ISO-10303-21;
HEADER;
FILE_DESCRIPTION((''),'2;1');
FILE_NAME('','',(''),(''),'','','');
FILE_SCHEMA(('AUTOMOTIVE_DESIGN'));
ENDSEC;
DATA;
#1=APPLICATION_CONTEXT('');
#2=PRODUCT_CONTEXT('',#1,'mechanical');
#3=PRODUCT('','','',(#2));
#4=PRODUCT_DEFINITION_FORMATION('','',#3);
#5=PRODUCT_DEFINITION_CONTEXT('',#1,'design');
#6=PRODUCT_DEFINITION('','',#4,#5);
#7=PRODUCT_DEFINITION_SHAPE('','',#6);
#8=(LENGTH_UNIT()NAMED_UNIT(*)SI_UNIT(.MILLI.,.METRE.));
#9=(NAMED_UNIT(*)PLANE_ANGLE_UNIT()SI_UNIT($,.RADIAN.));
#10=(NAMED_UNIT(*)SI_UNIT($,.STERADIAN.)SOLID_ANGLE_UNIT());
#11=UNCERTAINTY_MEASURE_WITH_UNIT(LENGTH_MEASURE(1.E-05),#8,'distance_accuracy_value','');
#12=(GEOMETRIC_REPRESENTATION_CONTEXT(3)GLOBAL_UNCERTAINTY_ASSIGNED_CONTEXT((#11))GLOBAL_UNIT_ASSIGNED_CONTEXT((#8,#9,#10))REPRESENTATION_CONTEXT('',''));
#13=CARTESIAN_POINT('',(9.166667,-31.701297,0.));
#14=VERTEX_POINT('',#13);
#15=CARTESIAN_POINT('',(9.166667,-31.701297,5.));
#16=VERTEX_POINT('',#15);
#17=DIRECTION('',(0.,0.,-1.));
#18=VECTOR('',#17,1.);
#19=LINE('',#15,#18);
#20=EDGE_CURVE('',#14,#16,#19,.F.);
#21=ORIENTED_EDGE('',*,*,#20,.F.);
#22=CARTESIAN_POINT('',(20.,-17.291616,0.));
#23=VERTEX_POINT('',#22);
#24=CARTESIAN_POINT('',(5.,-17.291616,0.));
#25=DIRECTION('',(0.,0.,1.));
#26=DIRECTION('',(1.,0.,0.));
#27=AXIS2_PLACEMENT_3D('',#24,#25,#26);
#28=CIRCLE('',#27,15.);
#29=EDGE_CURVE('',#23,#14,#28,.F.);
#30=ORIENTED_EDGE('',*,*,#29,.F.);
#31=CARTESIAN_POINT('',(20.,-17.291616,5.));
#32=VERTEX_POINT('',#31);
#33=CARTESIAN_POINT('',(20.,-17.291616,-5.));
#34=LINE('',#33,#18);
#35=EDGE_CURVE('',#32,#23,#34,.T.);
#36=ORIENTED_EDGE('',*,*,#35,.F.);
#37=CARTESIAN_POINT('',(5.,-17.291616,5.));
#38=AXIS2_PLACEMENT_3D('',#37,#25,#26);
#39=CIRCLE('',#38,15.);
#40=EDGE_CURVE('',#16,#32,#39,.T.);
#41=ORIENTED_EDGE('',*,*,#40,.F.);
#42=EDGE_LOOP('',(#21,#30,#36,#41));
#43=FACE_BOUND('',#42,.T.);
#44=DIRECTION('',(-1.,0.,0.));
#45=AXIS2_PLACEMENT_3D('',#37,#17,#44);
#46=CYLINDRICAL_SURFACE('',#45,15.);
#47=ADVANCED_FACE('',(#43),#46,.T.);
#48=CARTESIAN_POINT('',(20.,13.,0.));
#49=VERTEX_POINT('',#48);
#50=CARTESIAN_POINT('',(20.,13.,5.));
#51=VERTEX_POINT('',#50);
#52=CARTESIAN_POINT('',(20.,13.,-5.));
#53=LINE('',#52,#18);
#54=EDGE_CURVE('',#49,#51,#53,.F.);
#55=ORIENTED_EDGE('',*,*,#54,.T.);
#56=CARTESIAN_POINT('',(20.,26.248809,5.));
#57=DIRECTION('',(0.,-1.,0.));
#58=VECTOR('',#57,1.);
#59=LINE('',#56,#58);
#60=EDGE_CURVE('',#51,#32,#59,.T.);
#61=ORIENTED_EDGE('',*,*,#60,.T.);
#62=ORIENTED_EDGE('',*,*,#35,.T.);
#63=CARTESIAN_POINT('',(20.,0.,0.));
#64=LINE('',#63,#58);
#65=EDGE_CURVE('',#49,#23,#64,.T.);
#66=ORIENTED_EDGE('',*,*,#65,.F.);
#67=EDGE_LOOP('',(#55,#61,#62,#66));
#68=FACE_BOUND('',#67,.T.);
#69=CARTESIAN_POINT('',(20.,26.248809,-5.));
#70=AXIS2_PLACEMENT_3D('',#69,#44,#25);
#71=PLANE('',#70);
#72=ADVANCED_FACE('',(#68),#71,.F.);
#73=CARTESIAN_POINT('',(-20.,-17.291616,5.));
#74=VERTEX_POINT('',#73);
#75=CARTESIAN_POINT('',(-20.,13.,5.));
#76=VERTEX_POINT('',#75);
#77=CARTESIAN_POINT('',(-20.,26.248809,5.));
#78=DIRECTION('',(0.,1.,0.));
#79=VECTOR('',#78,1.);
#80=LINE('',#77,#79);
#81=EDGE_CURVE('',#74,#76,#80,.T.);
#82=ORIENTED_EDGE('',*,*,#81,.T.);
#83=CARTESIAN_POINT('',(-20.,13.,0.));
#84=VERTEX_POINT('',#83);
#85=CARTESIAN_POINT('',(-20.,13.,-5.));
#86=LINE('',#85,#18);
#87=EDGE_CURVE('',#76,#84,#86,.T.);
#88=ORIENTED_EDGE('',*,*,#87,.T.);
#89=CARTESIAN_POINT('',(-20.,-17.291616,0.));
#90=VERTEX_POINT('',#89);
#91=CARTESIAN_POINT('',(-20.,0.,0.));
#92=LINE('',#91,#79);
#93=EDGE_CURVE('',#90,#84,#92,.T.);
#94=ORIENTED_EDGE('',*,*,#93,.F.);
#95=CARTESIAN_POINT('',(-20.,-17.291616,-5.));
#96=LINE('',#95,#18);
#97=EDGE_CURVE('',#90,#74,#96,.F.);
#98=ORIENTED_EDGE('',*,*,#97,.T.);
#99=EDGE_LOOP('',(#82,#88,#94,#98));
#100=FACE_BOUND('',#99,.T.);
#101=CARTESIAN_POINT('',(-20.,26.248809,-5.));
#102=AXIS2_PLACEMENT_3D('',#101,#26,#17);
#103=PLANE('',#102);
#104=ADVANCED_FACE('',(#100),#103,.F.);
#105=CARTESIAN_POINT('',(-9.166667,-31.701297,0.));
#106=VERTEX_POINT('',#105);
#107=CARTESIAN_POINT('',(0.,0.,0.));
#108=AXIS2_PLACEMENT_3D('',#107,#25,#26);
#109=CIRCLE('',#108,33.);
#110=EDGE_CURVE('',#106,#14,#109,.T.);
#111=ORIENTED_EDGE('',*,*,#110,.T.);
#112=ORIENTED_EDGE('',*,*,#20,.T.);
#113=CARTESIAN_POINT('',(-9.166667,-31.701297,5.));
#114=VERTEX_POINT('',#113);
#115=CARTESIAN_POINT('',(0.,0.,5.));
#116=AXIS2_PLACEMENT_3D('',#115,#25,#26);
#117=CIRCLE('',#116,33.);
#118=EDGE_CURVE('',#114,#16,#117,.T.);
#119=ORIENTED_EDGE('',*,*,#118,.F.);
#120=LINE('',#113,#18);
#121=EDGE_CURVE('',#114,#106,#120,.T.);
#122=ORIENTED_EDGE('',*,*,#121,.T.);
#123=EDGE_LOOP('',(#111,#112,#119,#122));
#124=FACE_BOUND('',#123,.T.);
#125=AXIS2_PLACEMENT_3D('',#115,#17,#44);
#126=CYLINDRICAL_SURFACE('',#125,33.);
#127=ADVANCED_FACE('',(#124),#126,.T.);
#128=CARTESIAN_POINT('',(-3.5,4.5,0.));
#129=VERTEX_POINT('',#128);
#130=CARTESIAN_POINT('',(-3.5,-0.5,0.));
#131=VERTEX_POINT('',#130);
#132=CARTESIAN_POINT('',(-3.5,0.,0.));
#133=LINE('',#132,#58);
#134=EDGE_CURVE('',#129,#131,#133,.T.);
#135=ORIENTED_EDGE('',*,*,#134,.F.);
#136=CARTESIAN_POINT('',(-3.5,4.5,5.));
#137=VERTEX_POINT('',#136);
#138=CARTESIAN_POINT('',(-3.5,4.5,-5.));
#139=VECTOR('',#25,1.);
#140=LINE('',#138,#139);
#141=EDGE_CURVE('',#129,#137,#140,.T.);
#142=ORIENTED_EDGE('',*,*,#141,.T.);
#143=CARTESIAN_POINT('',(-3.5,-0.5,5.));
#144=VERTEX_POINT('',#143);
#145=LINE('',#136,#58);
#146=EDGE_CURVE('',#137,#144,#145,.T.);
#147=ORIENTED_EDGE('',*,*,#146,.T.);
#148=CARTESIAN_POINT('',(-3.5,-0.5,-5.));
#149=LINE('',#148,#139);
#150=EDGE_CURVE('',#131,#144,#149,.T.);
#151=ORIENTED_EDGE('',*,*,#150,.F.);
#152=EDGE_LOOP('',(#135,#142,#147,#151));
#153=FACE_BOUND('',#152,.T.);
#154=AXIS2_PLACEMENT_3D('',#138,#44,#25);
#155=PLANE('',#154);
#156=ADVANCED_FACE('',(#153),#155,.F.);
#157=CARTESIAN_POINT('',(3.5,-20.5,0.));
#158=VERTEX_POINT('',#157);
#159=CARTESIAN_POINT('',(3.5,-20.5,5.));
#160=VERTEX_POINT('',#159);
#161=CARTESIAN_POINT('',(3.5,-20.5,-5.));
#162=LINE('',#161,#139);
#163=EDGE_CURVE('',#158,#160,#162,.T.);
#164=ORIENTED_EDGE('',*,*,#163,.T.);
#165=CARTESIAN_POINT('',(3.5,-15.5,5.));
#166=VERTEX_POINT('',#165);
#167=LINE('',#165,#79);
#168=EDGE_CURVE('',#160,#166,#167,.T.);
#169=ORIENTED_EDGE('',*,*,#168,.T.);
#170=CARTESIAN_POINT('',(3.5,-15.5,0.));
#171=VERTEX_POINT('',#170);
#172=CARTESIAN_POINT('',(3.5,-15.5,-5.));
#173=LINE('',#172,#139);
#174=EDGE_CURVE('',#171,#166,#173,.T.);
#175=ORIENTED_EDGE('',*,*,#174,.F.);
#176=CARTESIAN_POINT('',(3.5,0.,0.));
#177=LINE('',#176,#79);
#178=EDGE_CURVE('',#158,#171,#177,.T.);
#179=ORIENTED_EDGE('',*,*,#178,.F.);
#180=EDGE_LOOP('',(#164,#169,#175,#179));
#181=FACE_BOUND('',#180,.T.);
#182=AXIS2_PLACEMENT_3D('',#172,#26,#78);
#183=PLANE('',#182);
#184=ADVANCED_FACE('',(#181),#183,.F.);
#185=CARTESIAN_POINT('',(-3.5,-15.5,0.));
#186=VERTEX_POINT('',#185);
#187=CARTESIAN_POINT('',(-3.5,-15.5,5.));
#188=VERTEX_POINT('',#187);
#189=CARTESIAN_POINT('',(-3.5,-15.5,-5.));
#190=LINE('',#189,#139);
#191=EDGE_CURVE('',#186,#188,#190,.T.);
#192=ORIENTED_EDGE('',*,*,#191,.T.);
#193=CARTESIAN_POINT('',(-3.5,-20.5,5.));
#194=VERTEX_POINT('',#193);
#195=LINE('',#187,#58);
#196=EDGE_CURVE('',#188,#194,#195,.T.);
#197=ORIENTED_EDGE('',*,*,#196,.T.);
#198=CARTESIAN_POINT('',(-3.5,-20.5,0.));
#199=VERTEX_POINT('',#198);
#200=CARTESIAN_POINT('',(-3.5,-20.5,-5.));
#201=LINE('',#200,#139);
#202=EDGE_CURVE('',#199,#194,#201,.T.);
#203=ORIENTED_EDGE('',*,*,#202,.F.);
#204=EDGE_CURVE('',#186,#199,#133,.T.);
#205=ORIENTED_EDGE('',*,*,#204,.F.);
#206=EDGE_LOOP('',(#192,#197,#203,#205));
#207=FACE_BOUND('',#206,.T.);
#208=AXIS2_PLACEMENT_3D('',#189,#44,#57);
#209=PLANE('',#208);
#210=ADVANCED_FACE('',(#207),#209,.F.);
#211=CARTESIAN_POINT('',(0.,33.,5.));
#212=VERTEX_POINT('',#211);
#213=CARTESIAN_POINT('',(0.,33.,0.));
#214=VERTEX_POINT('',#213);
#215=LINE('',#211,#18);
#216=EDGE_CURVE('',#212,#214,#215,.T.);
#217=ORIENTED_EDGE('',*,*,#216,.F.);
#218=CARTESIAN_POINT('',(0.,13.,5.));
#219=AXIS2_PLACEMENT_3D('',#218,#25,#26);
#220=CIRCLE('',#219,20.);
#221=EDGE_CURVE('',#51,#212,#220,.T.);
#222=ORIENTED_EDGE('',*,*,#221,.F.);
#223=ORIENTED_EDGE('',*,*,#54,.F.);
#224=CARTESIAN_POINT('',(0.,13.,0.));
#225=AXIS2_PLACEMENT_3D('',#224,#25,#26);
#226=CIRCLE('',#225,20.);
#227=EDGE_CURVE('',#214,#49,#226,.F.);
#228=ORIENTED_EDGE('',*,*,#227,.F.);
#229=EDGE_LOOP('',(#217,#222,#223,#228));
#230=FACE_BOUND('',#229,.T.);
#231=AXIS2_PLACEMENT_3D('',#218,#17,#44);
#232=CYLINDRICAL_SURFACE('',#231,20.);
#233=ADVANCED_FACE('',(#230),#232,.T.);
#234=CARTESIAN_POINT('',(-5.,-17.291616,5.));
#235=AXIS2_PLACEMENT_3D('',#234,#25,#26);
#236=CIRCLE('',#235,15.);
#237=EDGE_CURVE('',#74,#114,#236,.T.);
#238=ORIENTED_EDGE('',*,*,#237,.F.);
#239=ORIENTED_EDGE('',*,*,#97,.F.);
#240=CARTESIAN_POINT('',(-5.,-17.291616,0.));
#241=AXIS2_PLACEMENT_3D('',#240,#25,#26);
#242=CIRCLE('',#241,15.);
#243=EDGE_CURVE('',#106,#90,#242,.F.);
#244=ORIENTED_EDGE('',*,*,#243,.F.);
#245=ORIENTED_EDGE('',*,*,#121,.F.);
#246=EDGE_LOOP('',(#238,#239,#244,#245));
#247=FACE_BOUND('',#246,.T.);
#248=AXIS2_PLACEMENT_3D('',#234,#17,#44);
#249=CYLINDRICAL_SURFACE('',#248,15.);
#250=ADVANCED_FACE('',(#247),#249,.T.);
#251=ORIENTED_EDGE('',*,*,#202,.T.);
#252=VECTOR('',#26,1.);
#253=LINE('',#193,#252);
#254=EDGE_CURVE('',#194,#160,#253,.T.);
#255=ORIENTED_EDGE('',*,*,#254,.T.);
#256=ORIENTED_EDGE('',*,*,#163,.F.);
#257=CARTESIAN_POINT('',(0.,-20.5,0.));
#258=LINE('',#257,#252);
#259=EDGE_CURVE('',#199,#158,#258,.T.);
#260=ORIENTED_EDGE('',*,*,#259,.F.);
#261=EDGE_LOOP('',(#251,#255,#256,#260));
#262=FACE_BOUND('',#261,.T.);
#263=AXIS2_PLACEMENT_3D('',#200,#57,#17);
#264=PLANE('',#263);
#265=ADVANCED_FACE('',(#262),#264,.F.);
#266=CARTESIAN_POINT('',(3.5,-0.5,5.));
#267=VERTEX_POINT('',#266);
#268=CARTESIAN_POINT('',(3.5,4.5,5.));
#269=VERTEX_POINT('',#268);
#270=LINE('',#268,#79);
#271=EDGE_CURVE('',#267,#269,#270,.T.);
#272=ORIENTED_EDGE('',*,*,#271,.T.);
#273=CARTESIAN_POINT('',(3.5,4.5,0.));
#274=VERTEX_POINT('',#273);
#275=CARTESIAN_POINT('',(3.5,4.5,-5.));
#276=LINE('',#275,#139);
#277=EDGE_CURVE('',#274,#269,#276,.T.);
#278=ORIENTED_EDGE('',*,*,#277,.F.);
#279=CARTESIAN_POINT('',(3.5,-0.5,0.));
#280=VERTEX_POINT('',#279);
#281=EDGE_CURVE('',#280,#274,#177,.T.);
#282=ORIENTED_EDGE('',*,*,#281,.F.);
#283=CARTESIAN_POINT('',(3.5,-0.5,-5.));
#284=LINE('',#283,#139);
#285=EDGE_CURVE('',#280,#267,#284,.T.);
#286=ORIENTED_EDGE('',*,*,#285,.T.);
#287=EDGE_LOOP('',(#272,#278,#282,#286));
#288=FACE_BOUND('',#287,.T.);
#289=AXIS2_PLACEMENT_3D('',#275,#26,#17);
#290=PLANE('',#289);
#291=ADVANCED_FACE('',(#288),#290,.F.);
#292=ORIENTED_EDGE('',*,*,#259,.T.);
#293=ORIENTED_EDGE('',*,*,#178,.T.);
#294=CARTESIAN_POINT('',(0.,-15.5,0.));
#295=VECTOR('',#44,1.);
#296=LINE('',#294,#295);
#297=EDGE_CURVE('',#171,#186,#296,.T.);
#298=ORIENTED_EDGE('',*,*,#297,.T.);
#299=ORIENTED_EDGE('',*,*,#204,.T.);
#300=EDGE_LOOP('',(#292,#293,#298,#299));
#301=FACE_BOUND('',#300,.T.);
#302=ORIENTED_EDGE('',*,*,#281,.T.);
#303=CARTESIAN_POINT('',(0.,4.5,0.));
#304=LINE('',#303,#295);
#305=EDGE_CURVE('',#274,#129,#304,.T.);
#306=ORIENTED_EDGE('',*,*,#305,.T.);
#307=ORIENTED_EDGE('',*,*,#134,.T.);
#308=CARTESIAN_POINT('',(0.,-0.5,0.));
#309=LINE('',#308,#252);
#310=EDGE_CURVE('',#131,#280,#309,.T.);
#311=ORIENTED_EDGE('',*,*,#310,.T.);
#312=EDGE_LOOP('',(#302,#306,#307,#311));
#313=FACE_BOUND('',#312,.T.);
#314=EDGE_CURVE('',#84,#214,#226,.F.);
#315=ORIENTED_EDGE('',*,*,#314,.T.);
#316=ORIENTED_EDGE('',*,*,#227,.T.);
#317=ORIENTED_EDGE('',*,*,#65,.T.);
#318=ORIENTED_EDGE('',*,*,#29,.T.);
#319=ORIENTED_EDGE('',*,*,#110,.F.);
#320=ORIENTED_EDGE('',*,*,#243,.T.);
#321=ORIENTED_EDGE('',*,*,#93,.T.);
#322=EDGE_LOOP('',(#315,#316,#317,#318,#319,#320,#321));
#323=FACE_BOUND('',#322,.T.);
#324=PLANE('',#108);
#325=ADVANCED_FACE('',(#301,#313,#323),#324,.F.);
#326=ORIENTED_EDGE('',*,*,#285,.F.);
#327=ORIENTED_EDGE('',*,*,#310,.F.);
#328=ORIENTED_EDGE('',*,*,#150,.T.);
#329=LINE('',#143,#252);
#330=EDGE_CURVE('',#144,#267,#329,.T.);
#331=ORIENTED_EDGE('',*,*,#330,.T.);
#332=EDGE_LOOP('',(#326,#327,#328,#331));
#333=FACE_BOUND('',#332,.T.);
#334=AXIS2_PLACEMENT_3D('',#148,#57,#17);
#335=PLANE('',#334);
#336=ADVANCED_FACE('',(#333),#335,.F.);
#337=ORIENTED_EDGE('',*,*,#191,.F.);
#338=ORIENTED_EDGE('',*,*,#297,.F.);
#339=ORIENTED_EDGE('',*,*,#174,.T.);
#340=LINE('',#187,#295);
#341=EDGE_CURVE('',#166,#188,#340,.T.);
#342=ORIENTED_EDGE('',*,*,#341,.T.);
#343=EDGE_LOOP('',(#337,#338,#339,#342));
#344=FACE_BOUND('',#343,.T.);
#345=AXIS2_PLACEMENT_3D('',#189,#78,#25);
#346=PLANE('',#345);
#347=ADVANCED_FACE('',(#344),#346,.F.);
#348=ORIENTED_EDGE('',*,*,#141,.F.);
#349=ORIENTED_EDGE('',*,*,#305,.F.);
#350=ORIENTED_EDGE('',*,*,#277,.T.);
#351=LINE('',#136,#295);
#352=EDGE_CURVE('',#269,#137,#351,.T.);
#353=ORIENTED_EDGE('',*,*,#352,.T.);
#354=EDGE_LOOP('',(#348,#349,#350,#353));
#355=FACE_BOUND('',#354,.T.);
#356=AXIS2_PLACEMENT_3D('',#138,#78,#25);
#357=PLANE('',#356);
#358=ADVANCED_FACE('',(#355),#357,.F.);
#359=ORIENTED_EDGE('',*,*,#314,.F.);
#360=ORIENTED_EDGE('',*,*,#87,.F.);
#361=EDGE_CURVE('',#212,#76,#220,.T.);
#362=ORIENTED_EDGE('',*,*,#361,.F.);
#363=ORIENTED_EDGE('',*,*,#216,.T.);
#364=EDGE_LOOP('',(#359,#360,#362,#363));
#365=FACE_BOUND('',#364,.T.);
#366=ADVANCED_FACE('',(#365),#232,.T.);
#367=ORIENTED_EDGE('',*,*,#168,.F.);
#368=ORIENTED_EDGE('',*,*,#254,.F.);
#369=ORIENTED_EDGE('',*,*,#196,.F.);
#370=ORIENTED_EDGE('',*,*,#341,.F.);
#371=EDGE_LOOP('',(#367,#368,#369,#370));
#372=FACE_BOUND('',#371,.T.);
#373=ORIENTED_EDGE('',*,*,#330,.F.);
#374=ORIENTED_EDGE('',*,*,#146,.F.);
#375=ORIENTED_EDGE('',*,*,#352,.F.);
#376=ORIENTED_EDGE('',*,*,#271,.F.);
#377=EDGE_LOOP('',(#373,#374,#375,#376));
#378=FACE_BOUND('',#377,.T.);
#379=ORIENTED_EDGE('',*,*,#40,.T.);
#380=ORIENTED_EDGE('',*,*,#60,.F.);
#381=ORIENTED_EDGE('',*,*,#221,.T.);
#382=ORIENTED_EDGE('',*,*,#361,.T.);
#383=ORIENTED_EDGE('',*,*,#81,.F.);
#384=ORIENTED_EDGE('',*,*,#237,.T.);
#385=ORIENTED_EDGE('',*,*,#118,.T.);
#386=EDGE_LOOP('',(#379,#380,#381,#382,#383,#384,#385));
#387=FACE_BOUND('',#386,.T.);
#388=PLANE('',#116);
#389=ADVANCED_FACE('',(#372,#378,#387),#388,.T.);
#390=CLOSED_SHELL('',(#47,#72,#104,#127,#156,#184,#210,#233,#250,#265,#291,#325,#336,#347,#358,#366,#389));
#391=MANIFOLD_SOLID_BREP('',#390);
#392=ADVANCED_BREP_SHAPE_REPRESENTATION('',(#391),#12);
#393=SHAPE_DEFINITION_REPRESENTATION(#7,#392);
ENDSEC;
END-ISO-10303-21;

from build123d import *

# Parameters (mm, degrees)
SKETCH1_R           = 33
BOSS_EXTRUDE1_DEPTH = 5
CUT_EXTRUDE3_START  = -10
CUT_EXTRUDE3_DEPTH  = 10
FILLET2_R           = 20
FILLET3_R           = 15
SKETCH11_W          = 7
SKETCH11_H          = 5
CUT_EXTRUDE4_DEPTH  = 10


with BuildPart() as part:
    # Sketch1 → Boss-Extrude1 (new body)
    with BuildSketch(Plane.XY):
        Circle(SKETCH1_R)
    extrude(amount=BOSS_EXTRUDE1_DEPTH)

    # Sketch10 → Cut-Extrude3 (cut)
    with BuildSketch(Plane.XY.offset(5).offset(CUT_EXTRUDE3_START)):
        with BuildLine():
            Line((-20, 26.248809497), (-20, -26.248809497))
            ThreePointArc((-20, -26.248809497), (-33, 0), (-20, 26.248809497))
        make_face()
        with BuildLine():
            Line((20, 26.248809497), (20, -26.248809497))
            ThreePointArc((20, -26.248809497), (33, 0), (20, 26.248809497))
        make_face()
    extrude(amount=CUT_EXTRUDE3_DEPTH, mode=Mode.SUBTRACT)

    # Fillet2
    fillet2_edges = [part.edges().sort_by_distance(p)[0] for p in [
        (-20, 26.248809497, 2.5),
        (20, 26.248809497, 2.5),
    ]]
    fillet(fillet2_edges, radius=FILLET2_R - 0.0001)  # a hair under: the kernel refuses the full size

    # Fillet3
    fillet3_edges = [part.edges().sort_by_distance(p)[0] for p in [
        (-20, -26.248809497, 2.5),
        (20, -26.248809497, 2.5),
    ]]
    fillet(fillet3_edges, radius=FILLET3_R)

    # Sketch11 → Cut-Extrude4 (cut)
    with BuildSketch(Plane.XY.offset(5)):
        with Locations((0, 2)):
            Rectangle(SKETCH11_W, SKETCH11_H)
        with Locations((0, -18)):
            Rectangle(SKETCH11_W, SKETCH11_H)
    extrude(amount=-CUT_EXTRUDE4_DEPTH, mode=Mode.SUBTRACT)


solid = part.part
